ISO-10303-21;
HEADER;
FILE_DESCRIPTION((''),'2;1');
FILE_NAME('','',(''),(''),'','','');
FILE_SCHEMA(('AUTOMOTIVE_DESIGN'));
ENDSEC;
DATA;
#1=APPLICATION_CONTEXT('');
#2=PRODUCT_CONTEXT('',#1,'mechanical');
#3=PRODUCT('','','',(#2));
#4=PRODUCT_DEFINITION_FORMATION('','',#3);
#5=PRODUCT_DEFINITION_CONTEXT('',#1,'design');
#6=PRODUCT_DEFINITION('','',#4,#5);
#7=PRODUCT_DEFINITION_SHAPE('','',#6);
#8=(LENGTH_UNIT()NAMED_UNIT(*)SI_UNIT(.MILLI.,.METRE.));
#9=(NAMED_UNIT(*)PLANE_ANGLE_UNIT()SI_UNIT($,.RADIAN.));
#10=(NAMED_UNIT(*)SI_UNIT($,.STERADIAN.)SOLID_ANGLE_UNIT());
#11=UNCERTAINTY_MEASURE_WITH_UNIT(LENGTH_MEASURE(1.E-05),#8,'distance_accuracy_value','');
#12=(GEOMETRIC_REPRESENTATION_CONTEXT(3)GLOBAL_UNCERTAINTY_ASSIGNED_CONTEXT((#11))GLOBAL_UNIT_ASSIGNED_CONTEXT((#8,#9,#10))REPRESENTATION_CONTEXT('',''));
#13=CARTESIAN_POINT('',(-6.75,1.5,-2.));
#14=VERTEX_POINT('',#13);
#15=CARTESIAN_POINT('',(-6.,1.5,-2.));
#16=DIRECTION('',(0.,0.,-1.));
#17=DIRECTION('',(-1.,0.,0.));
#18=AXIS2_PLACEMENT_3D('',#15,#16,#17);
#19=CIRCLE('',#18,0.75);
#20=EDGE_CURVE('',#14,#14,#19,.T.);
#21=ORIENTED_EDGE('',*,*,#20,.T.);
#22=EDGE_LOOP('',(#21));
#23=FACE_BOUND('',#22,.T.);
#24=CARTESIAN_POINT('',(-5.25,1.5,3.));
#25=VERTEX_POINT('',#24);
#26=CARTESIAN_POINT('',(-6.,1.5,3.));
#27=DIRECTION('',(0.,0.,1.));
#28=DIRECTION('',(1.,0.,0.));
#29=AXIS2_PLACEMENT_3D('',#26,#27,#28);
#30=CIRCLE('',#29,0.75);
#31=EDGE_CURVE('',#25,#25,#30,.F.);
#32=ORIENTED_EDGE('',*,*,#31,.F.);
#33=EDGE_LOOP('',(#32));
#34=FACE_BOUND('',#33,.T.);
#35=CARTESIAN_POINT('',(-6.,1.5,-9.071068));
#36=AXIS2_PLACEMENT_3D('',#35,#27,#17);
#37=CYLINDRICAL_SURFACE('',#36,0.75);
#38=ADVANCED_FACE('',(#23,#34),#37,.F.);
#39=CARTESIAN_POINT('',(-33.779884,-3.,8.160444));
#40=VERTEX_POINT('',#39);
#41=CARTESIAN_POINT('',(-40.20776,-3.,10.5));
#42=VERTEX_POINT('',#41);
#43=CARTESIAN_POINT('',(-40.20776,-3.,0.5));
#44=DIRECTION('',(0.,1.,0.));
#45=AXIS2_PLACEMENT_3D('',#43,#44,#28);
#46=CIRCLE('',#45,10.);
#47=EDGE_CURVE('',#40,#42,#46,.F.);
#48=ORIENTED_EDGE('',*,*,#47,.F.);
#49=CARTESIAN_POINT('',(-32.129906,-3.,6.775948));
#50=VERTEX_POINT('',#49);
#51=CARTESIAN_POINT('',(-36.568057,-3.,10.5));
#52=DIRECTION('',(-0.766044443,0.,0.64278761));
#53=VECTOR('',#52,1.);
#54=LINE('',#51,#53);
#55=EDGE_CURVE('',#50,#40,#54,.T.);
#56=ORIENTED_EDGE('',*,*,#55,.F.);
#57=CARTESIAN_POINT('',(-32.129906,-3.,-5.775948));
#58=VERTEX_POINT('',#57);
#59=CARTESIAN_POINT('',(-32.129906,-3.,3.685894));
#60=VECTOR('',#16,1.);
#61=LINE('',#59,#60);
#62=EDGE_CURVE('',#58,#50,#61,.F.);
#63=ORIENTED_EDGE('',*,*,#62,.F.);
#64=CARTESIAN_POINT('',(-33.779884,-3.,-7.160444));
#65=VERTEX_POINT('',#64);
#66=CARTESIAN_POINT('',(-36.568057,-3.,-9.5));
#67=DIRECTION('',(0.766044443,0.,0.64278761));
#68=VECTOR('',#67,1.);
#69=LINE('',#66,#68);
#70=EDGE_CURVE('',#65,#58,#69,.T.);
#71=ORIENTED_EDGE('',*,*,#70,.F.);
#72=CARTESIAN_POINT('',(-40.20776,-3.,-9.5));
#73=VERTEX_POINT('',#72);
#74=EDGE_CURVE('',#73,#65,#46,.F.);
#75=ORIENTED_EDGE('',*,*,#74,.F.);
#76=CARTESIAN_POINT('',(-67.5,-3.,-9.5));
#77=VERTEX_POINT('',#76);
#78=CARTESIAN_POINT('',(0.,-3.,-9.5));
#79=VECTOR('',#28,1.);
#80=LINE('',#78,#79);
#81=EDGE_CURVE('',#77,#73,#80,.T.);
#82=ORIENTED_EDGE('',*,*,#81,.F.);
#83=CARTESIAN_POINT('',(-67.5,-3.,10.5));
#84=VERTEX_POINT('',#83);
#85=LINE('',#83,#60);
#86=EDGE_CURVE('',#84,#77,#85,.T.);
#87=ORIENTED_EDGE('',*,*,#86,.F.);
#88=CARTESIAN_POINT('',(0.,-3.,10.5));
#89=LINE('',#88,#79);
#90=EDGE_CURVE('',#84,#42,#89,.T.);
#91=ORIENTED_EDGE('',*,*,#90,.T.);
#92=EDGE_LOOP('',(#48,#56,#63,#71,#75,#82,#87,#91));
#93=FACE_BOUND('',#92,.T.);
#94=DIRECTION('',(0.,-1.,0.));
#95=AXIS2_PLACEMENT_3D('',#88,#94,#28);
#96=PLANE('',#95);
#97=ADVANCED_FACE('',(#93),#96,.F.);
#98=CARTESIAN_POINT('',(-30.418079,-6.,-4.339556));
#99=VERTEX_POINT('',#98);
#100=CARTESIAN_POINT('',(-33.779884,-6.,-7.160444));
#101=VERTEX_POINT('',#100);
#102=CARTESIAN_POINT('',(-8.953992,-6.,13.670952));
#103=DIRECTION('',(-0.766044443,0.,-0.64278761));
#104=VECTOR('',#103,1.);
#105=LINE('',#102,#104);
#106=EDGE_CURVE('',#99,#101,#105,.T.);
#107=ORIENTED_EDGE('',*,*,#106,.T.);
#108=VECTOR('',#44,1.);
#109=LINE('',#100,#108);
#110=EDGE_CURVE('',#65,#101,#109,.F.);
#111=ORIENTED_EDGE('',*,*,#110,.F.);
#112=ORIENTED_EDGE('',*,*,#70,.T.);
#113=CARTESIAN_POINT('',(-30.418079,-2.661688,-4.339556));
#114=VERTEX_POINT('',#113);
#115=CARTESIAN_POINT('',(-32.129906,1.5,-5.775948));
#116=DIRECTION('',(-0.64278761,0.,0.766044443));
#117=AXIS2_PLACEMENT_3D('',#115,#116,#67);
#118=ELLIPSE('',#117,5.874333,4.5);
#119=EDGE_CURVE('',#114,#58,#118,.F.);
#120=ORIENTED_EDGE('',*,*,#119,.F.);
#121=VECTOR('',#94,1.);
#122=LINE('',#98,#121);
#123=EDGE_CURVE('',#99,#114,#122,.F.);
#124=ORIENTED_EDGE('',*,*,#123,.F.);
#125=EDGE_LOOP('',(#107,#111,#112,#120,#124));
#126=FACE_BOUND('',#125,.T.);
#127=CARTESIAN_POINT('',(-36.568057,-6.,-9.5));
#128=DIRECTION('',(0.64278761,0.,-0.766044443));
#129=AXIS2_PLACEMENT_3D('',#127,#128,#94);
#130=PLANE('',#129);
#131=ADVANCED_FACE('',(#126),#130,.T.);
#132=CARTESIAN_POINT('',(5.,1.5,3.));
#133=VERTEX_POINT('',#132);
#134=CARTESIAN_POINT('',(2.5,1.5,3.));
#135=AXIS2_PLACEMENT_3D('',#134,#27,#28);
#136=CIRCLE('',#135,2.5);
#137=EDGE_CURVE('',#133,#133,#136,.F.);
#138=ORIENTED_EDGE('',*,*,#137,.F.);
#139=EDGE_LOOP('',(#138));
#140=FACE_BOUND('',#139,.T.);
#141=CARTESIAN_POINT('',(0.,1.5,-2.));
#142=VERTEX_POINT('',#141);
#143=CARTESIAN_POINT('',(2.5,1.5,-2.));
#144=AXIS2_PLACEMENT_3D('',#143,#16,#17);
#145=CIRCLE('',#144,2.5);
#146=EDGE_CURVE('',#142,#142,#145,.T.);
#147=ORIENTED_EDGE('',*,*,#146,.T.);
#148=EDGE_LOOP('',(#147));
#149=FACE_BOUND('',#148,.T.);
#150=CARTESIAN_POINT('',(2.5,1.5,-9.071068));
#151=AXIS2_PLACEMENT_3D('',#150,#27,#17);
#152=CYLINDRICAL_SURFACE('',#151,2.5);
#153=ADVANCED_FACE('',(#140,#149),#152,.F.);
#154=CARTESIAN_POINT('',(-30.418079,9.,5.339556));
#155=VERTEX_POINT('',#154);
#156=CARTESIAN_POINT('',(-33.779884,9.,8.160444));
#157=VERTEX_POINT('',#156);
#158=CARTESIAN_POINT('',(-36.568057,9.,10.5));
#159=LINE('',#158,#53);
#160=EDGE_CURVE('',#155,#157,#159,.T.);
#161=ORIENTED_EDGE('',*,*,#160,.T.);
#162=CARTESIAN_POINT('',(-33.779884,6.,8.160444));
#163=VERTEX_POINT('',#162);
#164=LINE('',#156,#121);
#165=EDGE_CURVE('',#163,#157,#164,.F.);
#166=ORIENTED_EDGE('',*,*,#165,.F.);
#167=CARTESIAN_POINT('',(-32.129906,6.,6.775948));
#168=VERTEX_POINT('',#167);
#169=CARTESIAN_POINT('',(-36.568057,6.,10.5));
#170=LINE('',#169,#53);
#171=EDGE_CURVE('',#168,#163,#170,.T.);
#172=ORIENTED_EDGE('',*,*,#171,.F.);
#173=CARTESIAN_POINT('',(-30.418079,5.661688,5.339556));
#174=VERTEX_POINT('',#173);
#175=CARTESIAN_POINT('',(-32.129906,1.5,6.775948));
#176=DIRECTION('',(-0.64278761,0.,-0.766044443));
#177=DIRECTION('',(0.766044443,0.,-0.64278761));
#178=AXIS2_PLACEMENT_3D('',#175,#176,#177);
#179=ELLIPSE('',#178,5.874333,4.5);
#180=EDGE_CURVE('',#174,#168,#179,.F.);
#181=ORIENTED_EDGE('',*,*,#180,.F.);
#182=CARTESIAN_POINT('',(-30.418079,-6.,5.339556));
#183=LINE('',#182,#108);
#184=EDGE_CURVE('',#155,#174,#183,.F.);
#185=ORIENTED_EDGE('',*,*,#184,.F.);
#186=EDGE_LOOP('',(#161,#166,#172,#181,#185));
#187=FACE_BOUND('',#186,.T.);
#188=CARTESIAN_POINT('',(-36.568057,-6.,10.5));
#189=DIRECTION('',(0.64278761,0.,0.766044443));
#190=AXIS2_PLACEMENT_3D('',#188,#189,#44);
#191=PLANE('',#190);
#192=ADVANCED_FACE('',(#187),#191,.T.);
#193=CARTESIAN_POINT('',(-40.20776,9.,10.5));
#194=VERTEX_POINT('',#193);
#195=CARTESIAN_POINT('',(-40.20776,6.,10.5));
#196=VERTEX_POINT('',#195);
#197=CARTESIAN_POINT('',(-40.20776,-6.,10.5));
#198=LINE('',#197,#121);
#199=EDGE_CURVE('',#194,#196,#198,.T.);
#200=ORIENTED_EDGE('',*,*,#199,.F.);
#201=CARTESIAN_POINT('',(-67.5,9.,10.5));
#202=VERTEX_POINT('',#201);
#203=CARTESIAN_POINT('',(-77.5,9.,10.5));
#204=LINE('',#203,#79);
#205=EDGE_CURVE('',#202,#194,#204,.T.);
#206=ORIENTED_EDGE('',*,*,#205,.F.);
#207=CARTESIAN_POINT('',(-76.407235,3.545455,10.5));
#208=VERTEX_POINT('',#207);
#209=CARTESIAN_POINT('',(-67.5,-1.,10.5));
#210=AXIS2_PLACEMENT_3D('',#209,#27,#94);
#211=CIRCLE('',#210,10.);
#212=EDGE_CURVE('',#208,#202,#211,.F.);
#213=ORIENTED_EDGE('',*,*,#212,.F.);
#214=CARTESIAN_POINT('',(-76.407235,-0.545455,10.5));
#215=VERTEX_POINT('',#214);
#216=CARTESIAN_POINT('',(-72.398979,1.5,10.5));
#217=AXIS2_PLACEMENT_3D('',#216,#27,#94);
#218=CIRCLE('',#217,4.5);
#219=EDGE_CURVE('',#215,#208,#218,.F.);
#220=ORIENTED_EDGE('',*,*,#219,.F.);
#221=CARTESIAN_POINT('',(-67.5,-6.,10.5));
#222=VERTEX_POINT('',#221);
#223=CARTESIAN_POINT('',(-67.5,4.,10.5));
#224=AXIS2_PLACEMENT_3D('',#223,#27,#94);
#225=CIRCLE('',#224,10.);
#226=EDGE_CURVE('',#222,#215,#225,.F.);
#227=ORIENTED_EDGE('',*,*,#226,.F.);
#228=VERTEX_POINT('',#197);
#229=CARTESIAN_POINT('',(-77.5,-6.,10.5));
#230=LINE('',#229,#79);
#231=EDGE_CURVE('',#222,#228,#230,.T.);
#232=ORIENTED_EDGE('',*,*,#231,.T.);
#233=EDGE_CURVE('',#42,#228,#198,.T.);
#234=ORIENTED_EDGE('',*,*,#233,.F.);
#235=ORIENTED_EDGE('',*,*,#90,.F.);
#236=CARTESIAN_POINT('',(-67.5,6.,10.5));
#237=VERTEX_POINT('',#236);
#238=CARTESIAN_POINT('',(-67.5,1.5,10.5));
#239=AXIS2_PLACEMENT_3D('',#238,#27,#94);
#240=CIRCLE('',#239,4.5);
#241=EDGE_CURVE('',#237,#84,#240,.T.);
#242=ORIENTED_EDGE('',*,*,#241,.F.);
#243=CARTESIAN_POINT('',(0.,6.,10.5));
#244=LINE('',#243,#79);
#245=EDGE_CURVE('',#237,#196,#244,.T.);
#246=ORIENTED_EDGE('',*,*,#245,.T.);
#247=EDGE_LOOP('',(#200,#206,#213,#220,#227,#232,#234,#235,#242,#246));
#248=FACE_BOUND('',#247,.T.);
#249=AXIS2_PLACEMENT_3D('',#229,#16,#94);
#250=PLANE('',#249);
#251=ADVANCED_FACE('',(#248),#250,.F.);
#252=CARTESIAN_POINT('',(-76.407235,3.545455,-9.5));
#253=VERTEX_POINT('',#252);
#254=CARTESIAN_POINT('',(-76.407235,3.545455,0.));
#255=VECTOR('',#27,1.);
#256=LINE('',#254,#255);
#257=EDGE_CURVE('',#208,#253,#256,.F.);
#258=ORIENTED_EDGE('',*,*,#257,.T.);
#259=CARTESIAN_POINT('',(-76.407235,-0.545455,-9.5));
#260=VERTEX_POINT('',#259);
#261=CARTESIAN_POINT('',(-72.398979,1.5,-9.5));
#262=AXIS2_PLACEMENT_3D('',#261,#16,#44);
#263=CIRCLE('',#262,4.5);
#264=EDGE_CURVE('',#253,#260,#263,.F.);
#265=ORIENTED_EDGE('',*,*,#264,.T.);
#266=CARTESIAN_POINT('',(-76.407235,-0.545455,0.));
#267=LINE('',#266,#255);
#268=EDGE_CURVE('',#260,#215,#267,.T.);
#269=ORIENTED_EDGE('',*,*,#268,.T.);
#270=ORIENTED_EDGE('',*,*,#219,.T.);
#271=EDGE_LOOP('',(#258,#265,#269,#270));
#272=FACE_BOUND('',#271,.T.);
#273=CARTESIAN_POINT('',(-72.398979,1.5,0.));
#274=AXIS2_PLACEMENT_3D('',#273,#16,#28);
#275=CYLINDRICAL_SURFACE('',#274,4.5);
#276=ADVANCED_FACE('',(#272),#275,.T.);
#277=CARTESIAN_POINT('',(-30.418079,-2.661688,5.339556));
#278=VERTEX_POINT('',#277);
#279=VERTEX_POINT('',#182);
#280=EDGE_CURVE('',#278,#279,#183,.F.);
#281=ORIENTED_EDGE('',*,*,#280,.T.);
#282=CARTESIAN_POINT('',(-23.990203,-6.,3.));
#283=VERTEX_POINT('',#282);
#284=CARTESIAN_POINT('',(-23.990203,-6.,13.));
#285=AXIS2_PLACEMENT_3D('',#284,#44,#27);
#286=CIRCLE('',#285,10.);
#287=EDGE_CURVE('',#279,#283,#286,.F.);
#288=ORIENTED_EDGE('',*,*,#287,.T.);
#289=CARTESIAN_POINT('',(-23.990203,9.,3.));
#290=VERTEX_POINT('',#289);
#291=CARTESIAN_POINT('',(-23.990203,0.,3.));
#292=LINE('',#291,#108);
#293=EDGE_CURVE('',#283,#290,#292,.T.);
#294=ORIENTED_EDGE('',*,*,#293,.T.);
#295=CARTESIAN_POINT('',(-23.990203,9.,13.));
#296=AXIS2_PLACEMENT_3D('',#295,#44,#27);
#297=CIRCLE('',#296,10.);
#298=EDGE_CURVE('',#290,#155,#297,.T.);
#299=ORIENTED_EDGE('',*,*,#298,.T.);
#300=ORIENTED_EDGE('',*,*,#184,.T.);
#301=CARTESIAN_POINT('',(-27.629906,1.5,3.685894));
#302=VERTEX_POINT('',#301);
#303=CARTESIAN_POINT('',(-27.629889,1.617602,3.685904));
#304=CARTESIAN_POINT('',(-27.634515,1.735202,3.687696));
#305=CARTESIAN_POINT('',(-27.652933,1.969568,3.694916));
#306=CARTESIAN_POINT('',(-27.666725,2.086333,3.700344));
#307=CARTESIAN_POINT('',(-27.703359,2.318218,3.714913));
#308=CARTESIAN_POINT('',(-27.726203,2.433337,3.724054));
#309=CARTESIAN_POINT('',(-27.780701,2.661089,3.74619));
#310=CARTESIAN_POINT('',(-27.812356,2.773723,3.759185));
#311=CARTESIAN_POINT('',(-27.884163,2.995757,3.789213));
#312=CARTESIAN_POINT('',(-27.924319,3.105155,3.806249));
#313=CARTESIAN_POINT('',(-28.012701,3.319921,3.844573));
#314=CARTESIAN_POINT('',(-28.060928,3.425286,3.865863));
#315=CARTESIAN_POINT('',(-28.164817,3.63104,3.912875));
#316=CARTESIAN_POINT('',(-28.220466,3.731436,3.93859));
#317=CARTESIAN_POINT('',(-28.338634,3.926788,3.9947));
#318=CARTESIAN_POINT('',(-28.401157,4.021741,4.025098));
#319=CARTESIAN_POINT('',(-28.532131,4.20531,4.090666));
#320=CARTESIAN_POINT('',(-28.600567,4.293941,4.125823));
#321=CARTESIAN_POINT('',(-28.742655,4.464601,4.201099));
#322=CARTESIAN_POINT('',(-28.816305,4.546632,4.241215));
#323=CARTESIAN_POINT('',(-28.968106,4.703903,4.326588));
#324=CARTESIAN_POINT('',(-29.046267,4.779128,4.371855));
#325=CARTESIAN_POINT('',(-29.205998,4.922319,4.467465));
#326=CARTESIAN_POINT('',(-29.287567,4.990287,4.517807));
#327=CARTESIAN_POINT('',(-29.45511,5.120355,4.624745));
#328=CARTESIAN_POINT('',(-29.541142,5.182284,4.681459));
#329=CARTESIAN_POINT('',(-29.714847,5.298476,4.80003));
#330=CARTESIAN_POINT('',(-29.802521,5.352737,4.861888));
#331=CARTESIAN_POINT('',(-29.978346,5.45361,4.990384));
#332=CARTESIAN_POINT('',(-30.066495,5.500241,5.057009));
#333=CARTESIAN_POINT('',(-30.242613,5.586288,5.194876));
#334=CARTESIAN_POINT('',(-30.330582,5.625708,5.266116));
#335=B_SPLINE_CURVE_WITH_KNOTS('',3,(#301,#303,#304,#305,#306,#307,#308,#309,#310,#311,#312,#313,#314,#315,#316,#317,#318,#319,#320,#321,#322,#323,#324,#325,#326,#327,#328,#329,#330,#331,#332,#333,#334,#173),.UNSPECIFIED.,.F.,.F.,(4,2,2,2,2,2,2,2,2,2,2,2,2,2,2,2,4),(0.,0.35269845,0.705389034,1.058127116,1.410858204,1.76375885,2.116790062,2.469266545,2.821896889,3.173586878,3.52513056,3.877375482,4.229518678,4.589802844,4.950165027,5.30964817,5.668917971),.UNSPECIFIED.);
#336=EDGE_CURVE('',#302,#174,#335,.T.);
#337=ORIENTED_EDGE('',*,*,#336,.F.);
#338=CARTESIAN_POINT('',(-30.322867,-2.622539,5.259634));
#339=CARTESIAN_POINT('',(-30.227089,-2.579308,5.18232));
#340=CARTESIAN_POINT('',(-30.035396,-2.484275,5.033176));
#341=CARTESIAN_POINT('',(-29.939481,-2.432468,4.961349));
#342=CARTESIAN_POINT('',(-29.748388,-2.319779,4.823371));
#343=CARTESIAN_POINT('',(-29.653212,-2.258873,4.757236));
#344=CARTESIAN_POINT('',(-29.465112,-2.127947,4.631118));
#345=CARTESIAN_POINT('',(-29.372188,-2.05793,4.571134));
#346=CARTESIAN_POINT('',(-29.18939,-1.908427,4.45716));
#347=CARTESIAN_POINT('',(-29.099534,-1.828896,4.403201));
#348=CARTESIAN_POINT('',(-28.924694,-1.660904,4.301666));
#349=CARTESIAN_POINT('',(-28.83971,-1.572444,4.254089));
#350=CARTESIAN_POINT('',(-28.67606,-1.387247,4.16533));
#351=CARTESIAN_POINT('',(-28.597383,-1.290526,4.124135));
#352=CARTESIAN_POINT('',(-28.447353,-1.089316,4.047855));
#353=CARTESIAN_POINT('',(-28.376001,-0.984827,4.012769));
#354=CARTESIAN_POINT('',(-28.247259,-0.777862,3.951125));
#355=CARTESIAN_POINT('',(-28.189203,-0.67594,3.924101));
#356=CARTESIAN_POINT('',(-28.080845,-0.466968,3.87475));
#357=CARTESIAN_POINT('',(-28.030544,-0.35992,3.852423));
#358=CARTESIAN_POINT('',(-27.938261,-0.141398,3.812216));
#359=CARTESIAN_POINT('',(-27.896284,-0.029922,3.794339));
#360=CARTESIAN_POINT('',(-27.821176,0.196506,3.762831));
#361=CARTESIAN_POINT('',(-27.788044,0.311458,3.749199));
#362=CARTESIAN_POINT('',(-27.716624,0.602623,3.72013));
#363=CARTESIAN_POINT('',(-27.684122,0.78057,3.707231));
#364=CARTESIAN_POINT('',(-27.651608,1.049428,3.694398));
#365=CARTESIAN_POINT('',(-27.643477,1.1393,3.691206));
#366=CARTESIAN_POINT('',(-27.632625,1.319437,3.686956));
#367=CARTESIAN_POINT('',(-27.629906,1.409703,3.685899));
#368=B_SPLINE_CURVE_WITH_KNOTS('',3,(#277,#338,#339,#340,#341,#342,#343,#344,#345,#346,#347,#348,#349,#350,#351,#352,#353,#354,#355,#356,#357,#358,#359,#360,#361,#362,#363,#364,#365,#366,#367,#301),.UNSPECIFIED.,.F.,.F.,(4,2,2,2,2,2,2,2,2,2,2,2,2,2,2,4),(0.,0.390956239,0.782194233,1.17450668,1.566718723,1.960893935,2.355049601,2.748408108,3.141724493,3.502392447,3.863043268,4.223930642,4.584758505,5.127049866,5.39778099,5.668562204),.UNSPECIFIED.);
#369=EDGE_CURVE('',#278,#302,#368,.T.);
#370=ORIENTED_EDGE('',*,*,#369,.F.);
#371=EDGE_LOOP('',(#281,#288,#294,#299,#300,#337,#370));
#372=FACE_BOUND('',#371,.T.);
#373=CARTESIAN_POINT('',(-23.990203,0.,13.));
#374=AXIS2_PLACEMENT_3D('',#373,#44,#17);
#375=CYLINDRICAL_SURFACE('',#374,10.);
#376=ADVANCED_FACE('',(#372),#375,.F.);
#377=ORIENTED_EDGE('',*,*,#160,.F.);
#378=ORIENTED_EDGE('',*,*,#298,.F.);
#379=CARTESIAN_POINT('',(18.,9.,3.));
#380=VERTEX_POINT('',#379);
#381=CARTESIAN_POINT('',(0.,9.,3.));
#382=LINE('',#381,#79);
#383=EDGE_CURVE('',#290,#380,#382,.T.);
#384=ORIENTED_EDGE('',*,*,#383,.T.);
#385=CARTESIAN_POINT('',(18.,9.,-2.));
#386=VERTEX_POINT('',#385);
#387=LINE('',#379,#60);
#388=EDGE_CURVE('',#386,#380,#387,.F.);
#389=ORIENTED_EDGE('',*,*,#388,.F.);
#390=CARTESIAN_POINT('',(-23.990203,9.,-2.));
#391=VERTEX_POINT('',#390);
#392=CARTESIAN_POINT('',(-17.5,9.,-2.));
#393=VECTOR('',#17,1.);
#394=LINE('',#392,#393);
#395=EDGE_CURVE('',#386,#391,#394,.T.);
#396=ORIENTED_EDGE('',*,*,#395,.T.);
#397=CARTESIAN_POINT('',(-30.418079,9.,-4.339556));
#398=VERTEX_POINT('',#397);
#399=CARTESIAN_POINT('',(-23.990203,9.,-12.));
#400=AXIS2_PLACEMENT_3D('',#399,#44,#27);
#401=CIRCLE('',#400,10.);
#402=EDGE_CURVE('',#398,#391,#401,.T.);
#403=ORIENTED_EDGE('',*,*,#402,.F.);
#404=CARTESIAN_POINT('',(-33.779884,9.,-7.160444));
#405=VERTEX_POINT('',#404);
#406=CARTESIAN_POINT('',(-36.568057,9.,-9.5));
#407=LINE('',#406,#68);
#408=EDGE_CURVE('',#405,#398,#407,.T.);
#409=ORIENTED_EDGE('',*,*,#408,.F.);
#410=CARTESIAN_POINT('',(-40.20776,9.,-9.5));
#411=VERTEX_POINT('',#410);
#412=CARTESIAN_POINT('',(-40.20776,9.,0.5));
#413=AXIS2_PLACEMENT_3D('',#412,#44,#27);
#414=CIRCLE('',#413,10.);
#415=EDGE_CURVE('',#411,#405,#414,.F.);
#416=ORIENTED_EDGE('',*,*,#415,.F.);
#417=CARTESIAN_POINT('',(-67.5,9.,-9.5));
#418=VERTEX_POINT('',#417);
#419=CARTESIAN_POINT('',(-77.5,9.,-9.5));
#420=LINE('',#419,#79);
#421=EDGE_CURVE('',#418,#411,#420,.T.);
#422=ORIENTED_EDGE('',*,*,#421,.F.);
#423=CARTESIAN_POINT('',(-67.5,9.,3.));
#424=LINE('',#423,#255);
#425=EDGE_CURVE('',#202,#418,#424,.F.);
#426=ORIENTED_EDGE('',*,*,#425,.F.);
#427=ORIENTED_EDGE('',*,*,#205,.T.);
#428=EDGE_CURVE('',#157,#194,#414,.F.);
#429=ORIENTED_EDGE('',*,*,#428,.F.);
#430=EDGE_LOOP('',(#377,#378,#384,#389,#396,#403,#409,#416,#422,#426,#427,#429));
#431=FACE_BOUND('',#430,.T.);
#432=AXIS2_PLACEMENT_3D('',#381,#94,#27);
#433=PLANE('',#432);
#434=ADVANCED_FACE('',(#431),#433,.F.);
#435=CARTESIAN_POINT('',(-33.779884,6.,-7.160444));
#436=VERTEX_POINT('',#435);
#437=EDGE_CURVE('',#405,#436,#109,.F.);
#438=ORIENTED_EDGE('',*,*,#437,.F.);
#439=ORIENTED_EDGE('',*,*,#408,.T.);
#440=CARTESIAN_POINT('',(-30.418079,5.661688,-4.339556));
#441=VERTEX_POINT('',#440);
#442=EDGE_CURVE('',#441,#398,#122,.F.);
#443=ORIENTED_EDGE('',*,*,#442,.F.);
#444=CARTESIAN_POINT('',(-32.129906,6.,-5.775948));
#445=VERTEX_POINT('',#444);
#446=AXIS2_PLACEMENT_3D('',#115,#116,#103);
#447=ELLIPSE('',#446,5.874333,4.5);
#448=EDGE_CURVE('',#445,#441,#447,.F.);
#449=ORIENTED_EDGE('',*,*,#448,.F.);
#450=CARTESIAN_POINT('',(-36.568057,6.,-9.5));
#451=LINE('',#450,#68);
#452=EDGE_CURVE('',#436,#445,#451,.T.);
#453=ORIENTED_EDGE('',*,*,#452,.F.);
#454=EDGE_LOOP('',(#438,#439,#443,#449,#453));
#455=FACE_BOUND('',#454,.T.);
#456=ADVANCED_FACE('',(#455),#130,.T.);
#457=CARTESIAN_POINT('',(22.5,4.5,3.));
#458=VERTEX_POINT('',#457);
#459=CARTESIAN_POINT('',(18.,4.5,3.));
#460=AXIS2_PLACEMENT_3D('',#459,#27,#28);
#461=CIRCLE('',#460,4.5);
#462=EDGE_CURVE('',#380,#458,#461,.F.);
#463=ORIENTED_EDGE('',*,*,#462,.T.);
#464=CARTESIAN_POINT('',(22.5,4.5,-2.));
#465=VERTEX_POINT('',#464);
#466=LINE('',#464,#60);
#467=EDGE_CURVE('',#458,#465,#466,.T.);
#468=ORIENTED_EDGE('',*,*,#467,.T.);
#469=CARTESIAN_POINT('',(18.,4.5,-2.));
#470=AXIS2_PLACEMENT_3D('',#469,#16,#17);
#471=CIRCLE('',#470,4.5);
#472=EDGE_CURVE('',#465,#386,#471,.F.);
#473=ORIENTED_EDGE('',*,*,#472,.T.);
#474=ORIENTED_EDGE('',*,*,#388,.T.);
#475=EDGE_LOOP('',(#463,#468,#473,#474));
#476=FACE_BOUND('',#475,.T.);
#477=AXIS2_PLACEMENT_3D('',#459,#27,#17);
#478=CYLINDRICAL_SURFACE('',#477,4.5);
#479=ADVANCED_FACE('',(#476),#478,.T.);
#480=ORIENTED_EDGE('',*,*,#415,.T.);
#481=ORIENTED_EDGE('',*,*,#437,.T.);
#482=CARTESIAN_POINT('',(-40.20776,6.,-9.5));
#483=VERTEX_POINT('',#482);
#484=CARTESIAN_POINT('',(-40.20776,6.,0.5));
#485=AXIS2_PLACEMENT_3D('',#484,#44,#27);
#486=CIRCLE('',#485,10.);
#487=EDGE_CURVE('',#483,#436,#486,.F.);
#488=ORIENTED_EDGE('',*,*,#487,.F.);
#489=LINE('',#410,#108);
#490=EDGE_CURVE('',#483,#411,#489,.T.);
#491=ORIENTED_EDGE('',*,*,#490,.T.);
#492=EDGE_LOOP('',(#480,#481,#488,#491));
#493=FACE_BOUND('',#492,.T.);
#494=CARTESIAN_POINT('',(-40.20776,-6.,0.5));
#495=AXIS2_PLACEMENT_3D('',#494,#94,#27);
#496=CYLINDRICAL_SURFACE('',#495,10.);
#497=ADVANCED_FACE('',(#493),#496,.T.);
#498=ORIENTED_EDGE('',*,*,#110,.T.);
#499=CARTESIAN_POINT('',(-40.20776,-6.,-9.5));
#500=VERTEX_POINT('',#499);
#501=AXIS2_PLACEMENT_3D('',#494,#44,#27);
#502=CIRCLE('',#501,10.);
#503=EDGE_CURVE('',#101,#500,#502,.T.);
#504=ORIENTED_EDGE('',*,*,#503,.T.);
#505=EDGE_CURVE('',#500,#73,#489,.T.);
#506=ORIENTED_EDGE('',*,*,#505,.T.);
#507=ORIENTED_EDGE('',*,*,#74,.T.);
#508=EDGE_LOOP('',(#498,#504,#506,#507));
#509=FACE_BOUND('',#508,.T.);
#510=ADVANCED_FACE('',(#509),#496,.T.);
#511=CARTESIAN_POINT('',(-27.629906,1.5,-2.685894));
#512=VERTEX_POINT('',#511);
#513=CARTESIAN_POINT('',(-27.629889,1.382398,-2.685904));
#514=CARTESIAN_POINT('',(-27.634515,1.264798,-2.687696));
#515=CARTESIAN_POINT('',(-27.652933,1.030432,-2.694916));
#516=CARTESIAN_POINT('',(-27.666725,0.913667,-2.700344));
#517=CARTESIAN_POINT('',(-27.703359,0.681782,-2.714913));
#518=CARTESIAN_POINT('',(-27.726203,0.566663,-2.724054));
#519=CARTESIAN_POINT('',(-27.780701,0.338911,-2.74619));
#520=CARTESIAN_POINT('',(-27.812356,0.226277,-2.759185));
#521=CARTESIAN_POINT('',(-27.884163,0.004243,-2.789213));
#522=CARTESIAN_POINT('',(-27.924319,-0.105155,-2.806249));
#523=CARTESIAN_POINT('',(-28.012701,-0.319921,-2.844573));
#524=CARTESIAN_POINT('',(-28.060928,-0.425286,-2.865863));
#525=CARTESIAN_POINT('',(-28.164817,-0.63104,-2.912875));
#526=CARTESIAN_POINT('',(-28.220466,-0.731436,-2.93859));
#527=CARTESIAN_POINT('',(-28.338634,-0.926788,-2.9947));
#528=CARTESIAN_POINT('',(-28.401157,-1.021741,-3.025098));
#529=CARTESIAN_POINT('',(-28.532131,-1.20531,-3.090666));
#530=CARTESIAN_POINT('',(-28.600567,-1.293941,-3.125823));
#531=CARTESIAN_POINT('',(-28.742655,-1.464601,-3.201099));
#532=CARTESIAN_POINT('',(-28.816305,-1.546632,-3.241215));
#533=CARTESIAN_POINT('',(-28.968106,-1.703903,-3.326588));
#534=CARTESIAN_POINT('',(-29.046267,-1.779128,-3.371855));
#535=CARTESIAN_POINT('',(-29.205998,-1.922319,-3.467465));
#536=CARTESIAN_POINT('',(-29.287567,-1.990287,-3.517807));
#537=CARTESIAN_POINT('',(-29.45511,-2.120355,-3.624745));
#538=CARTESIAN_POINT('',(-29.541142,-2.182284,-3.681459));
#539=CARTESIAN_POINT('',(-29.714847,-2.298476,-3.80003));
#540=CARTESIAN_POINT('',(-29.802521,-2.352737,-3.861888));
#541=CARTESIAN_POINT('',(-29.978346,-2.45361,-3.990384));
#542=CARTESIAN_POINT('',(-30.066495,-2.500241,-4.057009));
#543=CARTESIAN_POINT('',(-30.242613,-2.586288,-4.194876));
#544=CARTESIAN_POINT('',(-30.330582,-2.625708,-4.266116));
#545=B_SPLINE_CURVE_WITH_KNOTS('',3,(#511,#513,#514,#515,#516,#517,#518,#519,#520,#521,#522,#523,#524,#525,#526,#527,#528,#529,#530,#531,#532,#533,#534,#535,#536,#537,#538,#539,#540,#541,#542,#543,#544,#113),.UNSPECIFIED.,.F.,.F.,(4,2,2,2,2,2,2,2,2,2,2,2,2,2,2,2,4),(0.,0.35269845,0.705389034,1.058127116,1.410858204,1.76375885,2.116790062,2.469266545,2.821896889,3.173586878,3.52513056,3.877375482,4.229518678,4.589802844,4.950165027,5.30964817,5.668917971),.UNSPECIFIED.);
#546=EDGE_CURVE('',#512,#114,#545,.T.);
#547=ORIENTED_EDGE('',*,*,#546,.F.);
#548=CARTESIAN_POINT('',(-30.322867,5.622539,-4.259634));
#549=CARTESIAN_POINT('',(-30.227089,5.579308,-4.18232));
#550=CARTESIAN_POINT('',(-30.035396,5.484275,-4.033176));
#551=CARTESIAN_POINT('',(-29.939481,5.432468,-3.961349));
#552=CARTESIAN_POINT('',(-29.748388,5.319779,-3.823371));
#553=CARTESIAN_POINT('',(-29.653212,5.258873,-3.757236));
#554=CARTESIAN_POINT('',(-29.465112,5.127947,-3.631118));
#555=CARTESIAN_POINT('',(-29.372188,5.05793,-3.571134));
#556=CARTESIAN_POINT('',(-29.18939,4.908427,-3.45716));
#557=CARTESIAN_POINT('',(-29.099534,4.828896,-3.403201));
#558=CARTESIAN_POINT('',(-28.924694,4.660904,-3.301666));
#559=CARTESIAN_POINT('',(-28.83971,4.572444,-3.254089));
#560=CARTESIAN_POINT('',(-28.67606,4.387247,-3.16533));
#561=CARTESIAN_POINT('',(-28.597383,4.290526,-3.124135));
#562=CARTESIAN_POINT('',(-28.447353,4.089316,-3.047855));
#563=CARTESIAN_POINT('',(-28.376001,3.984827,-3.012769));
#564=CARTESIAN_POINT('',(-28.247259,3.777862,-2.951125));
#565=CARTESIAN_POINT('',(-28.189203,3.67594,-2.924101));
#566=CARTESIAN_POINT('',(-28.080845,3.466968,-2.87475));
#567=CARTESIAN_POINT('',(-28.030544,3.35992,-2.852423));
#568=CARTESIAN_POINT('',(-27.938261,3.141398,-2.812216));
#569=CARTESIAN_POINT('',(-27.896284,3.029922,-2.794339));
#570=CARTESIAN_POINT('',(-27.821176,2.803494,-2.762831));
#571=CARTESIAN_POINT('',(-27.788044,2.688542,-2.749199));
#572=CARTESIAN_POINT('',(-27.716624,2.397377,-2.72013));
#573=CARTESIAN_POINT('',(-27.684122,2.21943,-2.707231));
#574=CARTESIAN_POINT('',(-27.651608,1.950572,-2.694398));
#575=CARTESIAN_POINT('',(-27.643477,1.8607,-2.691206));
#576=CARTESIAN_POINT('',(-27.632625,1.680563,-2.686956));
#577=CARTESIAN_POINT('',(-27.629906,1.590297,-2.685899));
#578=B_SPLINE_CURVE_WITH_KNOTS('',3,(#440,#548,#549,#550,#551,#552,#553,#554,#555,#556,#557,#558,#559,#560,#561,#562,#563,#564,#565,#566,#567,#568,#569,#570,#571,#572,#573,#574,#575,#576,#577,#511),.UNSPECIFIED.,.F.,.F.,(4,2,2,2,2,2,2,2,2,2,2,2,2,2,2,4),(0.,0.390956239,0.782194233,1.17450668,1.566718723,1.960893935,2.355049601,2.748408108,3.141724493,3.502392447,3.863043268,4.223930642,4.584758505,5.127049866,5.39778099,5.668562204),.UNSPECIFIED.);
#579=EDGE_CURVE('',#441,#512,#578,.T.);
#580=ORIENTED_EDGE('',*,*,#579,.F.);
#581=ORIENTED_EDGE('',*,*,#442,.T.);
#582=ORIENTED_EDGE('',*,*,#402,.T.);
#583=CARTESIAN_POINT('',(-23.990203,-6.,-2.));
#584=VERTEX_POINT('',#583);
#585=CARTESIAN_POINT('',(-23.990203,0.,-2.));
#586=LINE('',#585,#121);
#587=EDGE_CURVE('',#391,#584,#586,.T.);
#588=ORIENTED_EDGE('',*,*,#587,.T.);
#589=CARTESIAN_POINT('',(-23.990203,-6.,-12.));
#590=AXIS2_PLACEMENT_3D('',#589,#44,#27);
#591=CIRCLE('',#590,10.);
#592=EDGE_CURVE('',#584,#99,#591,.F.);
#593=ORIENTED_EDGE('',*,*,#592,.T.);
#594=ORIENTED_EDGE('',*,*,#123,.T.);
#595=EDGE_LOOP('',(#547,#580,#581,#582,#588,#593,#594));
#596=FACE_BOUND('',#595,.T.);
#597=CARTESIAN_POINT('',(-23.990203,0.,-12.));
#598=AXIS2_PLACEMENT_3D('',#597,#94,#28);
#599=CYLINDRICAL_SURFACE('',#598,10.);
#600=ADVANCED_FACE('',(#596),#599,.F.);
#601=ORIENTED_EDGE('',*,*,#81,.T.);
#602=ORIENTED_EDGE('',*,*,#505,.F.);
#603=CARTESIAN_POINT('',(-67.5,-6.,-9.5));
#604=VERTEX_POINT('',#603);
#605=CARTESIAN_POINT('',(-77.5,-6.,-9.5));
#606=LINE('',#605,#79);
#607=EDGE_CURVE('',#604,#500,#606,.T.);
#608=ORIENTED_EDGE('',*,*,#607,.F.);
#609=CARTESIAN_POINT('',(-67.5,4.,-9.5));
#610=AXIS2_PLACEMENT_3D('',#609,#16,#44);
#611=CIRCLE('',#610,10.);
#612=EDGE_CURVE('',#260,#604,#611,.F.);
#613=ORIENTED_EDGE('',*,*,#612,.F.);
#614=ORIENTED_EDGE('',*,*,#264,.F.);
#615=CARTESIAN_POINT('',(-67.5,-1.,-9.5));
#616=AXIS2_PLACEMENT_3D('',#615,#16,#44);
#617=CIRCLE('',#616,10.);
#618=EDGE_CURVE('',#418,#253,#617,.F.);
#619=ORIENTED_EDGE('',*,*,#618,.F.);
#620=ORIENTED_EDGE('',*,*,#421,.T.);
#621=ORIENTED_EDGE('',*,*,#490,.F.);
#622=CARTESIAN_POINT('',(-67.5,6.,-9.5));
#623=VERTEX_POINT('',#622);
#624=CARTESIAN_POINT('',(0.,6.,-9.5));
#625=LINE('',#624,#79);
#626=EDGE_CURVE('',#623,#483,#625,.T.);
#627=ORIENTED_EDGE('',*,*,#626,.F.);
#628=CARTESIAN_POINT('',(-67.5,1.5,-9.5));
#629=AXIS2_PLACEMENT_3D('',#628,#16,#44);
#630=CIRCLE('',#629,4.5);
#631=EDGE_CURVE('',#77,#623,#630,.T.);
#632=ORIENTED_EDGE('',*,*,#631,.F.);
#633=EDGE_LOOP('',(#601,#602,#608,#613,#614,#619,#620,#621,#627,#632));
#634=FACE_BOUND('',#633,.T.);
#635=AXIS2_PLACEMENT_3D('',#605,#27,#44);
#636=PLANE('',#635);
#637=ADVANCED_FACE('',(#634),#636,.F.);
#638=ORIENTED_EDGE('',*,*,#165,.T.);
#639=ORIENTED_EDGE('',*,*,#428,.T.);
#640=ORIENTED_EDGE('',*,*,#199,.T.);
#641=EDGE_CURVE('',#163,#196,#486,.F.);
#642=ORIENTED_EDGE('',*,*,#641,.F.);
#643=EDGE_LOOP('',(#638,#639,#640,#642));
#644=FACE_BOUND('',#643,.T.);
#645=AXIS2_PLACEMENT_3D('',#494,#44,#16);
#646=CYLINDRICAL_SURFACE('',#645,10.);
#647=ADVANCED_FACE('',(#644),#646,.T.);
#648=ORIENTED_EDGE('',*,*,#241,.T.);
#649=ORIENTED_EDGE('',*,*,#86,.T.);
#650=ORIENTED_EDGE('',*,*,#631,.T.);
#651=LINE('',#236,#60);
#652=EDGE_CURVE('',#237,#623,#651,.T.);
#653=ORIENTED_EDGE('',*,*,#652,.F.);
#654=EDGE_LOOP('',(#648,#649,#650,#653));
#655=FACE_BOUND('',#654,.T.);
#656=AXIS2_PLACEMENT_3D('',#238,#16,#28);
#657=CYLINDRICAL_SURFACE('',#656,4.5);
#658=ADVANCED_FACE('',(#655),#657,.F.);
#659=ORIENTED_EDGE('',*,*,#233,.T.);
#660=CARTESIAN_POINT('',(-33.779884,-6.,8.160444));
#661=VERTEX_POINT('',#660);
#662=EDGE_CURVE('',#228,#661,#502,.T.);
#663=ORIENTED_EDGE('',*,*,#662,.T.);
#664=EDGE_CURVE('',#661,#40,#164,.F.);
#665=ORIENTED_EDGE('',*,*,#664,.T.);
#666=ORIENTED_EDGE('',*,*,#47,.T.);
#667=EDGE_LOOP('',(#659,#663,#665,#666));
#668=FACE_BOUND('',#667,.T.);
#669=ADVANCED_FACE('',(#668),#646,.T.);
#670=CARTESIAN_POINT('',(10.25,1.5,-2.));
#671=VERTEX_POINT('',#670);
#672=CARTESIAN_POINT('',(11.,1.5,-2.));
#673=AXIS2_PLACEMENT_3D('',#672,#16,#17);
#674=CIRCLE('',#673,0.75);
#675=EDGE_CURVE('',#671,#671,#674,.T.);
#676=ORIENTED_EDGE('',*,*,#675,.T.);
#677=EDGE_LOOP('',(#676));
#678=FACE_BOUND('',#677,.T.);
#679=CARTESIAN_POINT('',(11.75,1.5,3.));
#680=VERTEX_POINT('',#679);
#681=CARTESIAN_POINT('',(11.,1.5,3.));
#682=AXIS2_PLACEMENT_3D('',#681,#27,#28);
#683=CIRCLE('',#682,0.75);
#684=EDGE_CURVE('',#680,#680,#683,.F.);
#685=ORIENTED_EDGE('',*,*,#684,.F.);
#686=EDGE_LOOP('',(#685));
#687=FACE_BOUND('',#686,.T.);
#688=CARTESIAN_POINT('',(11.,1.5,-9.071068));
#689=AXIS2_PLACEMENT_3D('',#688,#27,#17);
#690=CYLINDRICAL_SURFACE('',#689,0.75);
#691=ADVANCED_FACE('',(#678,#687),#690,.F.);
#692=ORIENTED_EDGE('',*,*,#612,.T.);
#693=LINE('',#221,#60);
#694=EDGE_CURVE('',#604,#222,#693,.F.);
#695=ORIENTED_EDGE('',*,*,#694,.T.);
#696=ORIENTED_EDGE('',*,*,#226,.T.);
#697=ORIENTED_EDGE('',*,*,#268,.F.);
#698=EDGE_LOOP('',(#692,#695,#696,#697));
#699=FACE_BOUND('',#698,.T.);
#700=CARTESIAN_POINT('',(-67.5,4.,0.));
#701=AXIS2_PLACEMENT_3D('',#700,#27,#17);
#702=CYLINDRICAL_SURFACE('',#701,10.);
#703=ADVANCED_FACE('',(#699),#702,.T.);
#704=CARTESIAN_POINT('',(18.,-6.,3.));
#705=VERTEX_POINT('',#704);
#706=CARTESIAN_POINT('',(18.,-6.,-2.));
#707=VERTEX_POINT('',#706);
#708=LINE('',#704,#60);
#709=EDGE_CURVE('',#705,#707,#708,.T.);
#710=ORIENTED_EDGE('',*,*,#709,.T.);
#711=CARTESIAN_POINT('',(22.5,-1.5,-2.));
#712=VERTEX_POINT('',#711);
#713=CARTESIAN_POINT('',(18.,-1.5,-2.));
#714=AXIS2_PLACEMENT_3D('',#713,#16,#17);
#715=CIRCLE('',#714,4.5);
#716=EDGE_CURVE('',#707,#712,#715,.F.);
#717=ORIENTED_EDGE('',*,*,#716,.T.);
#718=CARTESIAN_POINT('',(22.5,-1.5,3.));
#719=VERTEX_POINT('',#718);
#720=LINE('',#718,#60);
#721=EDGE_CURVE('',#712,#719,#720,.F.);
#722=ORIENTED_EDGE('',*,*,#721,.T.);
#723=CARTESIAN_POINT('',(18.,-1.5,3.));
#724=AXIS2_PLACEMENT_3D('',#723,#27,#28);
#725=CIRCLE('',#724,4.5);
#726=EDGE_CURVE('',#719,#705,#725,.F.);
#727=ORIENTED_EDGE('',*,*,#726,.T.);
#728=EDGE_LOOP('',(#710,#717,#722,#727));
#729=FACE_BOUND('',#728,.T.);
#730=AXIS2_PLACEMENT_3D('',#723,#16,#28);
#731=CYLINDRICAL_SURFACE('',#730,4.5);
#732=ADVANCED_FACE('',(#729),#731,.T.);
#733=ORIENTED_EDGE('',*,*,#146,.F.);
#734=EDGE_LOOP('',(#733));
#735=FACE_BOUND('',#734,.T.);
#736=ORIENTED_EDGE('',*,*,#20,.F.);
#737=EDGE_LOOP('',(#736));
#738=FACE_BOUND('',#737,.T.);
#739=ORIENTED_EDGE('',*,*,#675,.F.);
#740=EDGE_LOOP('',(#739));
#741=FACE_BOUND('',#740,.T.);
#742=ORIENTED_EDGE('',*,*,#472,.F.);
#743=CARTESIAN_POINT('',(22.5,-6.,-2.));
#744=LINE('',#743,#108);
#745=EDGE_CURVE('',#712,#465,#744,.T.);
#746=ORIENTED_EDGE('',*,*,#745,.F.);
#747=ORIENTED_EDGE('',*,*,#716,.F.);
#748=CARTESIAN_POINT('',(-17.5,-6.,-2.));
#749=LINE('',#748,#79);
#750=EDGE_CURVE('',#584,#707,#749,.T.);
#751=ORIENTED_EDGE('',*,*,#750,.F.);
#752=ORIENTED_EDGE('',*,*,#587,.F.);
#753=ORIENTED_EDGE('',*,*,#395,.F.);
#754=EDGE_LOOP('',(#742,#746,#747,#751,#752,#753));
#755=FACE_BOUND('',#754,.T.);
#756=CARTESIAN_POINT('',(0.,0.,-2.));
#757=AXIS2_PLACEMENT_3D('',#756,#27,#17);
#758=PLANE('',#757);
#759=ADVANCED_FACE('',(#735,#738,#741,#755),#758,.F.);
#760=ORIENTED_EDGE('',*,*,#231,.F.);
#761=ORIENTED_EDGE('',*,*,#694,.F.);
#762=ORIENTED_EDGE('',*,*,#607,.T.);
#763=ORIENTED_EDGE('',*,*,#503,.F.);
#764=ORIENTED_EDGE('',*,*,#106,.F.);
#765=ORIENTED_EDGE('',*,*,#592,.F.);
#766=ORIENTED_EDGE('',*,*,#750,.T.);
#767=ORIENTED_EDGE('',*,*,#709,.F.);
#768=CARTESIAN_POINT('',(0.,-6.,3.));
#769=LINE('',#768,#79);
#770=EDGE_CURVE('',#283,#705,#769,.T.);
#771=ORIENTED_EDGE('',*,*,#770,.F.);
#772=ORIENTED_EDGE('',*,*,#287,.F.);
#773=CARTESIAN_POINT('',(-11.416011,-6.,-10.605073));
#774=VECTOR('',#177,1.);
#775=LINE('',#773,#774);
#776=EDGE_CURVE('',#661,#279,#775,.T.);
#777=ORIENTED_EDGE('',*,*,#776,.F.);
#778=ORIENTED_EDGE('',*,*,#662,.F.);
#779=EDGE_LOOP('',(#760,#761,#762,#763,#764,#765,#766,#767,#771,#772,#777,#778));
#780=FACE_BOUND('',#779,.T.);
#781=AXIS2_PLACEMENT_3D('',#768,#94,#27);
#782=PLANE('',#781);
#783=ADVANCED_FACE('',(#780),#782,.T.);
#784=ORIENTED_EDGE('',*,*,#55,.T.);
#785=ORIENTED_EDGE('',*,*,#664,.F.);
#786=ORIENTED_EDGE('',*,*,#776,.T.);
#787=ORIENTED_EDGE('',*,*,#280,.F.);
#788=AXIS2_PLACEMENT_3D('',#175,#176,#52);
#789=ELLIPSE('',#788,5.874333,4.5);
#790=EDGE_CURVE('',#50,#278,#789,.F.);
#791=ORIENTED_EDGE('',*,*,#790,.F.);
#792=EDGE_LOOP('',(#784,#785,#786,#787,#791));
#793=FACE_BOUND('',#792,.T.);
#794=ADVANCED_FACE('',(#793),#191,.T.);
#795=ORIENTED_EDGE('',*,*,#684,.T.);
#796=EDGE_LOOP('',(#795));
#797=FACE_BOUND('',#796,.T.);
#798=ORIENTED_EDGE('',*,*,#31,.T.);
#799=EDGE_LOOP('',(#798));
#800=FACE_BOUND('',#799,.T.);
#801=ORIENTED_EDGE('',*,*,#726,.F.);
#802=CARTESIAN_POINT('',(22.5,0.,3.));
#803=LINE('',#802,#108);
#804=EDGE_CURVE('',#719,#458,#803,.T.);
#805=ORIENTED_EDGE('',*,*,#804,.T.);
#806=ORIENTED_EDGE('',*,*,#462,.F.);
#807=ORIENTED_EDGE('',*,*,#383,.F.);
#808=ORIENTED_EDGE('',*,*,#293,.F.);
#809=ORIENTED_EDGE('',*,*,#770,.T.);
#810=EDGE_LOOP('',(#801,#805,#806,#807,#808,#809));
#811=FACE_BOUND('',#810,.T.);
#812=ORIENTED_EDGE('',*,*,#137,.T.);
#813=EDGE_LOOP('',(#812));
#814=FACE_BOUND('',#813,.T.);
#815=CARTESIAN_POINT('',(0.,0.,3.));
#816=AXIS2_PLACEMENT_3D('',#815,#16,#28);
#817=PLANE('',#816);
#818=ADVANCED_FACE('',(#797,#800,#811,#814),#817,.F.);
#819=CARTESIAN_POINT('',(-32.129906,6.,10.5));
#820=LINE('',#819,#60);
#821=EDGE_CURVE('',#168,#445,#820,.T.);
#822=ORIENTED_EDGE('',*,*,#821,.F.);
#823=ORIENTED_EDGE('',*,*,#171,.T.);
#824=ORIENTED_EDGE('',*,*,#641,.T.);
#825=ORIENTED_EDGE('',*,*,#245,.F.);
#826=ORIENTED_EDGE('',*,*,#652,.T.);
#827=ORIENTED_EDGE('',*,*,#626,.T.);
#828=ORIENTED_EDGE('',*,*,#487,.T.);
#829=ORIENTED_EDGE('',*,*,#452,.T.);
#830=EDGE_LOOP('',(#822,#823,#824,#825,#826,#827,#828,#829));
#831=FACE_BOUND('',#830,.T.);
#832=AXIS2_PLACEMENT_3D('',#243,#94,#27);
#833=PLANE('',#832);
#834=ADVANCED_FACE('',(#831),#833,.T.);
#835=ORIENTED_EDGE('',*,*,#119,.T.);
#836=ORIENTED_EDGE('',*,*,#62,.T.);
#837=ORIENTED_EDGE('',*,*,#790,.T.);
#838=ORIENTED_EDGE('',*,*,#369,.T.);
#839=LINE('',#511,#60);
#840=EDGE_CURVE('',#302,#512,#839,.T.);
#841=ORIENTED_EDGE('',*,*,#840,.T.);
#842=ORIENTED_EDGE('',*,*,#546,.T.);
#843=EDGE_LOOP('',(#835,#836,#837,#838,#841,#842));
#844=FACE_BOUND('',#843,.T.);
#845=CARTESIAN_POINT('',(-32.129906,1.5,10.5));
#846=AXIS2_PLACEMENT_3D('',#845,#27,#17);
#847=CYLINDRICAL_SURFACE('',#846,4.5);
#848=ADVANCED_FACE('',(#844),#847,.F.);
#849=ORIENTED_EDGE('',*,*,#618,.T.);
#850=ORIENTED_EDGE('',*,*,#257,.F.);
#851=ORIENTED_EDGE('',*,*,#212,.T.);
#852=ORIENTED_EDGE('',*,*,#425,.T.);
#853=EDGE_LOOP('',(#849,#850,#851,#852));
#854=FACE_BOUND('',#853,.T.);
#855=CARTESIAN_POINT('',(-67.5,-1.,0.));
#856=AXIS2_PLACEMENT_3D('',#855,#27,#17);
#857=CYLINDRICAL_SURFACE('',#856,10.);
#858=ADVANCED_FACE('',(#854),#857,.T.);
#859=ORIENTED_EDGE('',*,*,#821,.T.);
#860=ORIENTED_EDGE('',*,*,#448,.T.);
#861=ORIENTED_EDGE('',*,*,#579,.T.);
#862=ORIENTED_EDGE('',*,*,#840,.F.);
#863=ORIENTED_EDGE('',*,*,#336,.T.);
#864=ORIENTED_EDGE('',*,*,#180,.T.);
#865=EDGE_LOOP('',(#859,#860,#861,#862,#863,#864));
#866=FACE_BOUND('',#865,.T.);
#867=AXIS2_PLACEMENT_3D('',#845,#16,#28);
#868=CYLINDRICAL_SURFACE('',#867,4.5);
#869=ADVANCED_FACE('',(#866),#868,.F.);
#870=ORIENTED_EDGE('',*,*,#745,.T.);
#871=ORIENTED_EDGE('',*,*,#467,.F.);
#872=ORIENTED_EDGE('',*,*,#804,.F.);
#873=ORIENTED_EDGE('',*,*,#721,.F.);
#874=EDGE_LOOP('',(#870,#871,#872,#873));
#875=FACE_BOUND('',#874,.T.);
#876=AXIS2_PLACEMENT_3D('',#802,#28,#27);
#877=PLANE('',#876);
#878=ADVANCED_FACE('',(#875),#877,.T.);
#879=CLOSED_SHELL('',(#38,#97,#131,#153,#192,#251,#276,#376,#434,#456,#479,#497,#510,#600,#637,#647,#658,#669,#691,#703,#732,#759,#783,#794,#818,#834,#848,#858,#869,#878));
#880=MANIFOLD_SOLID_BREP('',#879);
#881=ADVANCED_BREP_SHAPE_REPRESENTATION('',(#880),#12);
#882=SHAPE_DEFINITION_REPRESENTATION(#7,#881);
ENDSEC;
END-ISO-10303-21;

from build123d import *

# Parameters (mm, degrees)
ESBO_O1_W                         = 40
ESBO_O1_H                         = 15
RESSALTO_EXTRUS_O1_DEPTH          = 3
ESBO_O3_W                         = 40
ESBO_O3_H                         = 15
RESSALTO_EXTRUS_O2_DEPTH          = 2
CORTE_EXTRUS_O1_REACH             = 26.418
ESBO_O2_R                         = 2.5
ESBO_O2_R_2                       = 0.75
CORTE_EXTRUS_O1_DIRECTION_2_REACH = 26.418
ESBO_O5_W                         = 20
ESBO_O5_H                         = 15
RESSALTO_EXTRUS_O4_DEPTH          = 60
CHANFRO1_SIZE                     = 19.068057482
CHANFRO1_SIZE_2                   = 16
FILETE4_R                         = 10
ESBO_O6_W                         = 12.577854287
ESBO_O6_H                         = 9
CORTE_EXTRUS_O2_DEPTH             = 81.237970309
FILETE5_R                         = 4.5
CIRPATTERN1_COUNT                 = 2
FILLET1_R                         = 4.5


# Some blends are built 0.0001 mm under size
with BuildPart() as part:
    # Esboço1 → Ressalto-extrusão1 (new body)
    with BuildSketch(Plane.XY):
        with Locations((2.5, 1.5)):
            Rectangle(ESBO_O1_W, ESBO_O1_H)
    extrude(amount=-RESSALTO_EXTRUS_O1_DEPTH)

    # Esboço3 → Ressalto-extrusão2 (add)
    with BuildSketch(Plane.XY):
        with Locations((2.5, 1.5)):
            Rectangle(ESBO_O3_W, ESBO_O3_H)
    extrude(amount=RESSALTO_EXTRUS_O2_DEPTH)

    # Corte-extrusão1: up to this face of the body (flat: up to its plane)
    corte_extrus_o1_end = Plane(part.part.faces().sort_by_distance((2.5, 1.5, 2))[0])
    # Esboço2 → Corte-extrusão1 (cut, up to the picked face)
    with BuildSketch(Plane.XY, mode=Mode.PRIVATE) as corte_extrus_o1_sk1:
        with Locations(Location((2.5, 1.5, 0), (0, 0, 180))):
            Circle(ESBO_O2_R)
    corte_extrus_o1_tool1 = split(extrude(corte_extrus_o1_sk1.sketch, amount=CORTE_EXTRUS_O1_REACH, mode=Mode.PRIVATE), bisect_by=corte_extrus_o1_end, keep=Keep.BOTH, mode=Mode.PRIVATE)
    # Esboço2 → Corte-extrusão1 (cut, up to the picked face)
    with BuildSketch(Plane.XY, mode=Mode.PRIVATE) as corte_extrus_o1_sk2:
        with Locations(Location((-6, 1.5, 0), (0, 0, 180))):
            Circle(ESBO_O2_R_2)
    corte_extrus_o1_tool2 = split(extrude(corte_extrus_o1_sk2.sketch, amount=CORTE_EXTRUS_O1_REACH, mode=Mode.PRIVATE), bisect_by=corte_extrus_o1_end, keep=Keep.BOTH, mode=Mode.PRIVATE)
    corte_extrus_o1_1 = corte_extrus_o1_tool1.solids().sort_by(Axis((2.5, 1.5, 0), (0, 0, 1)))[0]
    add(corte_extrus_o1_1, mode=Mode.SUBTRACT)
    corte_extrus_o1_2 = corte_extrus_o1_tool2.solids().sort_by(Axis((-6, 1.5, 0), (0, 0, 1)))[0]
    add(corte_extrus_o1_2, mode=Mode.SUBTRACT)
    corte_extrus_o1 = corte_extrus_o1_1 + corte_extrus_o1_2  # Corte-extrusão1 as one shape, for the pattern or mirror that repeats it

    # Corte-extrusão1 direction 2: up to this face of the body (flat: up to its plane)
    corte_extrus_o1_direction_2_end = Plane(part.part.faces().sort_by_distance((2.5, 1.5, -3))[0])
    # Esboço2 → Corte-extrusão1 direction 2 (cut, up to the picked face)
    with BuildSketch(Plane.XY, mode=Mode.PRIVATE) as corte_extrus_o1_direction_2_sk1:
        with Locations(Location((2.5, 1.5, 0), (0, 0, 180))):
            Circle(ESBO_O2_R)
    corte_extrus_o1_direction_2_tool1 = split(extrude(corte_extrus_o1_direction_2_sk1.sketch, amount=-CORTE_EXTRUS_O1_DIRECTION_2_REACH, mode=Mode.PRIVATE), bisect_by=corte_extrus_o1_direction_2_end, keep=Keep.BOTH, mode=Mode.PRIVATE)
    # Esboço2 → Corte-extrusão1 direction 2 (cut, up to the picked face)
    with BuildSketch(Plane.XY, mode=Mode.PRIVATE) as corte_extrus_o1_direction_2_sk2:
        with Locations(Location((-6, 1.5, 0), (0, 0, 180))):
            Circle(ESBO_O2_R_2)
    corte_extrus_o1_direction_2_tool2 = split(extrude(corte_extrus_o1_direction_2_sk2.sketch, amount=-CORTE_EXTRUS_O1_DIRECTION_2_REACH, mode=Mode.PRIVATE), bisect_by=corte_extrus_o1_direction_2_end, keep=Keep.BOTH, mode=Mode.PRIVATE)
    corte_extrus_o1_direction_2_1 = corte_extrus_o1_direction_2_tool1.solids().sort_by(Axis((2.5, 1.5, 0), (0, 0, -1)))[0]
    add(corte_extrus_o1_direction_2_1, mode=Mode.SUBTRACT)
    corte_extrus_o1_direction_2_2 = corte_extrus_o1_direction_2_tool2.solids().sort_by(Axis((-6, 1.5, 0), (0, 0, -1)))[0]
    add(corte_extrus_o1_direction_2_2, mode=Mode.SUBTRACT)
    corte_extrus_o1_direction_2 = corte_extrus_o1_direction_2_1 + corte_extrus_o1_direction_2_2  # Corte-extrusão1 direction 2 as one shape, for the pattern or mirror that repeats it

    # Esboço5 → Ressalto-extrusão4 (add)
    with BuildSketch(Plane.ZY.offset(17.5)):
        with Locations((-0.5, 1.5)):
            Rectangle(ESBO_O5_W, ESBO_O5_H)
    extrude(amount=RESSALTO_EXTRUS_O4_DEPTH)

    # Chanfro1
    # the kernel refuses this chamfer: 19.068057482, 16 mm, written as the material it takes off along each edge
    with BuildSketch(Plane(origin=(-17.5, 58.146127732, -10.5), x_dir=(-0.9996889667359941, 0, -0.024939322090234247), z_dir=(0, -1, 0))) as chanfro1_piece_1_section:
        Polygon((CHANFRO1_SIZE * 0.99968896671, -CHANFRO1_SIZE * 0.0249393220896), (-CHANFRO1_SIZE_2 * 0.0249393220902, -CHANFRO1_SIZE_2 * 0.999688966736), (0, 0), align=None)
    chanfro1_piece_1 = extrude(amount=113.292255464, mode=Mode.PRIVATE)
    chanfro1_piece_1 = split(chanfro1_piece_1, bisect_by=Plane(origin=(-25.155035178, 1.5, -3), z_dir=(0, 0, -1)), keep=Keep.TOP, mode=Mode.PRIVATE)
    add(chanfro1_piece_1, mode=Mode.SUBTRACT)
    with BuildSketch(Plane(origin=(-17.5, 58.146127732, -10.5), x_dir=(-0.9996889667359941, 0, -0.024939322090234247), z_dir=(0, -1, 0))) as chanfro1_piece_2_section:
        Polygon((CHANFRO1_SIZE * 0.99968896671, -CHANFRO1_SIZE * 0.0249393220896), (-CHANFRO1_SIZE_2 * 0.0249393220902, -CHANFRO1_SIZE_2 * 0.999688966736), (0, 0), align=None)
    chanfro1_piece_2 = extrude(amount=113.292255464, mode=Mode.PRIVATE)
    chanfro1_piece_2 = split(chanfro1_piece_2, bisect_by=Plane(origin=(-18.373305927, 1.5, 2), z_dir=(0, 0, 1)), keep=Keep.TOP, mode=Mode.PRIVATE)
    add(chanfro1_piece_2, mode=Mode.SUBTRACT)
    with BuildSketch(Plane(origin=(-17.5, -55.146127732, 9.5), x_dir=(-0.9996889667359941, 0, 0.024939322090234247), z_dir=(0, 1, 0))) as chanfro1_piece_3_section:
        Polygon((CHANFRO1_SIZE * 0.99968896671, -CHANFRO1_SIZE * 0.0249393220896), (-CHANFRO1_SIZE_2 * 0.0249393220902, -CHANFRO1_SIZE_2 * 0.999688966736), (0, 0), align=None)
    chanfro1_piece_3 = extrude(amount=113.292255464, mode=Mode.PRIVATE)
    chanfro1_piece_3 = split(chanfro1_piece_3, bisect_by=Plane(origin=(-25.155035178, 1.5, 2), z_dir=(0, 0, 1)), keep=Keep.TOP, mode=Mode.PRIVATE)
    add(chanfro1_piece_3, mode=Mode.SUBTRACT)
    with BuildSketch(Plane(origin=(-17.5, -55.146127732, 9.5), x_dir=(-0.9996889667359941, 0, 0.024939322090234247), z_dir=(0, 1, 0))) as chanfro1_piece_4_section:
        Polygon((CHANFRO1_SIZE * 0.99968896671, -CHANFRO1_SIZE * 0.0249393220896), (-CHANFRO1_SIZE_2 * 0.0249393220902, -CHANFRO1_SIZE_2 * 0.999688966736), (0, 0), align=None)
    chanfro1_piece_4 = extrude(amount=113.292255464, mode=Mode.PRIVATE)
    chanfro1_piece_4 = split(chanfro1_piece_4, bisect_by=Plane(origin=(-18.373305927, 1.5, -3), z_dir=(0, 0, -1)), keep=Keep.TOP, mode=Mode.PRIVATE)
    add(chanfro1_piece_4, mode=Mode.SUBTRACT)

    # Filete4
    # the kernel refuses this fillet: 10 mm, written as the material it adds along each edge
    with BuildSketch(Plane(origin=(-27.629905537, 9, -3), x_dir=(1, 0, 0), z_dir=(0, -1, 0)), Plane(origin=(-27.629905537, -6, 2), x_dir=(1, 0, 0), z_dir=(0, 1, 0))) as filete4_piece_1:
        with BuildLine():
            CenterArc((FILETE4_R * 0.363970234266, -FILETE4_R), FILETE4_R, 90, 40)
            Line((-FILETE4_R * 0.27881737542, -FILETE4_R * 0.233955556881), (0, 0))
            Line((0, 0), (FILETE4_R * 0.363970234266, 0))
        make_face()
    extrude(amount=15)
    # the kernel refuses this fillet: 10 mm, written as the material it takes off along each edge
    with BuildSketch(Plane(origin=(-77.5, 9, 34.5), x_dir=(0, -1, 0), z_dir=(0, 0, -1))) as filete4_2_piece_1:
        with BuildLine():
            CenterArc((FILETE4_R, -FILETE4_R), FILETE4_R, 90, 90)
            Line((0, -FILETE4_R), (0, 0))
            Line((0, 0), (FILETE4_R, 0))
        make_face()
    extrude(amount=70, mode=Mode.SUBTRACT)
    with BuildSketch(Plane(origin=(-77.5, -6, -35.5), x_dir=(1, 0, 0), z_dir=(0, 0, 1))) as filete4_2_piece_2:
        with BuildLine():
            CenterArc((FILETE4_R, FILETE4_R), FILETE4_R, 180, 90)
            Line((0, FILETE4_R), (0, 0))
            Line((0, 0), (FILETE4_R, 0))
        make_face()
    extrude(amount=70, mode=Mode.SUBTRACT)
    with BuildSketch(Plane(origin=(-36.568057482, 18.099255857, -10.5), x_dir=(0.7660444431190706, 0, 0.6427876096864291), z_dir=(0, -1, 0))) as filete4_2_piece_3:
        with BuildLine():
            CenterArc((FILETE4_R * 0.363970234266, FILETE4_R), FILETE4_R, 230, 40)
            Line((-FILETE4_R * 0.27881737542, FILETE4_R * 0.233955556881), (0, 0))
            Line((0, 0), (FILETE4_R * 0.363970234266, 0))
        make_face()
    extrude(amount=33.198511713, mode=Mode.SUBTRACT)
    with BuildSketch(Plane(origin=(-36.568057482, -15.099255857, 9.5), x_dir=(-1, 0, 0), z_dir=(0, 1, 0))) as filete4_2_piece_4:
        with BuildLine():
            CenterArc((FILETE4_R * 0.363970234266, -FILETE4_R), FILETE4_R, 90, 40)
            Line((-FILETE4_R * 0.27881737542, -FILETE4_R * 0.233955556881), (0, 0))
            Line((0, 0), (FILETE4_R * 0.363970234266, 0))
        make_face()
    extrude(amount=33.198511713, mode=Mode.SUBTRACT)

    # Esboço6 → Corte-extrusão2 (cut, through all)
    with BuildSketch(Plane.XY.offset(9.5)):
        with BuildLine():
            Line((-40.207759824, 6), (-43.207759824, 6))
            Line((-43.207759824, 6), (-67.5, 6))
            ThreePointArc((-67.5, 6), (-71.468626967, 4.766281297), (-74.038348415, 1.5))
            ThreePointArc((-74.038348415, 1.5), (-71.468626967, -1.766281297), (-67.5, -3))
            Line((-67.5, -3), (-43.207759824, -3))
            Line((-43.207759824, -3), (-40.207759824, -3))
            Line((-40.207759824, -3), (-40.207759824, 6))
        make_face()
        with Locations((-33.918832681, 1.5)):
            Rectangle(ESBO_O6_W, ESBO_O6_H)
    extrude(amount=-CORTE_EXTRUS_O2_DEPTH, mode=Mode.SUBTRACT)

    # Filete5
    filete5_edges = [part.edges().sort_by_distance(p)[0] for p in [
        (-27.629905537, -3, -0.5),
        (-27.629905537, 6, -0.5),
        (22.5, -6, -0.5),
        (22.5, 9, -0.5),
    ]]
    fillet(filete5_edges, radius=FILETE5_R - 0.0001)  # a hair under: the kernel refuses the full size

    # CirPattern1: Corte-extrusão1, Corte-extrusão1 direction 2 ×2 about axis
    cirpattern1_axis = Axis((2.5, 1.5, 0), (0, 0, 1))
    add([corte_extrus_o1.rotate(cirpattern1_axis, i * 360 / CIRPATTERN1_COUNT) for i in range(1, CIRPATTERN1_COUNT)], mode=Mode.SUBTRACT)
    add([corte_extrus_o1_direction_2.rotate(cirpattern1_axis, i * 360 / CIRPATTERN1_COUNT) for i in range(1, CIRPATTERN1_COUNT)], mode=Mode.SUBTRACT)

    # Fillet1
    # the kernel refuses this fillet: 4.5 mm, written as the material it adds along each edge
    with BuildSketch(Plane(origin=(-74.038348415, 1.5, 9.5), x_dir=(0.8237540050665563, -0.566947386568461, 0), z_dir=(0, 0, -1))) as fillet1_piece_1:
        with BuildLine():
            CenterArc((5.385987308, -3.706897217), FILLET1_R, 55.462463306, 179.999811631)
            ThreePointArc((2.834717975, -7.413786046), (0.265006635, -4.147503786), (0, 0))
            ThreePointArc((0, 0), (3.968622227, 1.233715441), (7.937244454, 0))
        make_face()
    extrude(amount=20)
    # the kernel refuses this fillet: 4.5 mm, written as the material it takes off along each edge
    with BuildSketch(Plane(origin=(-77.182458366, 1.5, -15.968577797), x_dir=(0.3543987879296305, 0.9350943797895531, 0), z_dir=(0, 0, 1))) as fillet1_2_piece_1:
        with BuildLine():
            CenterArc((1.695259117, -4.473004216), FILLET1_R, 83.720910198, 54.071383579)
            ThreePointArc((-1.63795498, -1.449813223), (-0.858738838, -0.679985448), (0, 0))
            ThreePointArc((0, 0), (1.093715559, 0.05999063), (2.187431119, 0))
        make_face()
    extrude(amount=30.937155594, mode=Mode.SUBTRACT)


with BuildPart() as part_1:
    # Body-Move/Copy2: moved
    add(part.part.moved(Location((0, 0, 1))))


solid = part_1.part
